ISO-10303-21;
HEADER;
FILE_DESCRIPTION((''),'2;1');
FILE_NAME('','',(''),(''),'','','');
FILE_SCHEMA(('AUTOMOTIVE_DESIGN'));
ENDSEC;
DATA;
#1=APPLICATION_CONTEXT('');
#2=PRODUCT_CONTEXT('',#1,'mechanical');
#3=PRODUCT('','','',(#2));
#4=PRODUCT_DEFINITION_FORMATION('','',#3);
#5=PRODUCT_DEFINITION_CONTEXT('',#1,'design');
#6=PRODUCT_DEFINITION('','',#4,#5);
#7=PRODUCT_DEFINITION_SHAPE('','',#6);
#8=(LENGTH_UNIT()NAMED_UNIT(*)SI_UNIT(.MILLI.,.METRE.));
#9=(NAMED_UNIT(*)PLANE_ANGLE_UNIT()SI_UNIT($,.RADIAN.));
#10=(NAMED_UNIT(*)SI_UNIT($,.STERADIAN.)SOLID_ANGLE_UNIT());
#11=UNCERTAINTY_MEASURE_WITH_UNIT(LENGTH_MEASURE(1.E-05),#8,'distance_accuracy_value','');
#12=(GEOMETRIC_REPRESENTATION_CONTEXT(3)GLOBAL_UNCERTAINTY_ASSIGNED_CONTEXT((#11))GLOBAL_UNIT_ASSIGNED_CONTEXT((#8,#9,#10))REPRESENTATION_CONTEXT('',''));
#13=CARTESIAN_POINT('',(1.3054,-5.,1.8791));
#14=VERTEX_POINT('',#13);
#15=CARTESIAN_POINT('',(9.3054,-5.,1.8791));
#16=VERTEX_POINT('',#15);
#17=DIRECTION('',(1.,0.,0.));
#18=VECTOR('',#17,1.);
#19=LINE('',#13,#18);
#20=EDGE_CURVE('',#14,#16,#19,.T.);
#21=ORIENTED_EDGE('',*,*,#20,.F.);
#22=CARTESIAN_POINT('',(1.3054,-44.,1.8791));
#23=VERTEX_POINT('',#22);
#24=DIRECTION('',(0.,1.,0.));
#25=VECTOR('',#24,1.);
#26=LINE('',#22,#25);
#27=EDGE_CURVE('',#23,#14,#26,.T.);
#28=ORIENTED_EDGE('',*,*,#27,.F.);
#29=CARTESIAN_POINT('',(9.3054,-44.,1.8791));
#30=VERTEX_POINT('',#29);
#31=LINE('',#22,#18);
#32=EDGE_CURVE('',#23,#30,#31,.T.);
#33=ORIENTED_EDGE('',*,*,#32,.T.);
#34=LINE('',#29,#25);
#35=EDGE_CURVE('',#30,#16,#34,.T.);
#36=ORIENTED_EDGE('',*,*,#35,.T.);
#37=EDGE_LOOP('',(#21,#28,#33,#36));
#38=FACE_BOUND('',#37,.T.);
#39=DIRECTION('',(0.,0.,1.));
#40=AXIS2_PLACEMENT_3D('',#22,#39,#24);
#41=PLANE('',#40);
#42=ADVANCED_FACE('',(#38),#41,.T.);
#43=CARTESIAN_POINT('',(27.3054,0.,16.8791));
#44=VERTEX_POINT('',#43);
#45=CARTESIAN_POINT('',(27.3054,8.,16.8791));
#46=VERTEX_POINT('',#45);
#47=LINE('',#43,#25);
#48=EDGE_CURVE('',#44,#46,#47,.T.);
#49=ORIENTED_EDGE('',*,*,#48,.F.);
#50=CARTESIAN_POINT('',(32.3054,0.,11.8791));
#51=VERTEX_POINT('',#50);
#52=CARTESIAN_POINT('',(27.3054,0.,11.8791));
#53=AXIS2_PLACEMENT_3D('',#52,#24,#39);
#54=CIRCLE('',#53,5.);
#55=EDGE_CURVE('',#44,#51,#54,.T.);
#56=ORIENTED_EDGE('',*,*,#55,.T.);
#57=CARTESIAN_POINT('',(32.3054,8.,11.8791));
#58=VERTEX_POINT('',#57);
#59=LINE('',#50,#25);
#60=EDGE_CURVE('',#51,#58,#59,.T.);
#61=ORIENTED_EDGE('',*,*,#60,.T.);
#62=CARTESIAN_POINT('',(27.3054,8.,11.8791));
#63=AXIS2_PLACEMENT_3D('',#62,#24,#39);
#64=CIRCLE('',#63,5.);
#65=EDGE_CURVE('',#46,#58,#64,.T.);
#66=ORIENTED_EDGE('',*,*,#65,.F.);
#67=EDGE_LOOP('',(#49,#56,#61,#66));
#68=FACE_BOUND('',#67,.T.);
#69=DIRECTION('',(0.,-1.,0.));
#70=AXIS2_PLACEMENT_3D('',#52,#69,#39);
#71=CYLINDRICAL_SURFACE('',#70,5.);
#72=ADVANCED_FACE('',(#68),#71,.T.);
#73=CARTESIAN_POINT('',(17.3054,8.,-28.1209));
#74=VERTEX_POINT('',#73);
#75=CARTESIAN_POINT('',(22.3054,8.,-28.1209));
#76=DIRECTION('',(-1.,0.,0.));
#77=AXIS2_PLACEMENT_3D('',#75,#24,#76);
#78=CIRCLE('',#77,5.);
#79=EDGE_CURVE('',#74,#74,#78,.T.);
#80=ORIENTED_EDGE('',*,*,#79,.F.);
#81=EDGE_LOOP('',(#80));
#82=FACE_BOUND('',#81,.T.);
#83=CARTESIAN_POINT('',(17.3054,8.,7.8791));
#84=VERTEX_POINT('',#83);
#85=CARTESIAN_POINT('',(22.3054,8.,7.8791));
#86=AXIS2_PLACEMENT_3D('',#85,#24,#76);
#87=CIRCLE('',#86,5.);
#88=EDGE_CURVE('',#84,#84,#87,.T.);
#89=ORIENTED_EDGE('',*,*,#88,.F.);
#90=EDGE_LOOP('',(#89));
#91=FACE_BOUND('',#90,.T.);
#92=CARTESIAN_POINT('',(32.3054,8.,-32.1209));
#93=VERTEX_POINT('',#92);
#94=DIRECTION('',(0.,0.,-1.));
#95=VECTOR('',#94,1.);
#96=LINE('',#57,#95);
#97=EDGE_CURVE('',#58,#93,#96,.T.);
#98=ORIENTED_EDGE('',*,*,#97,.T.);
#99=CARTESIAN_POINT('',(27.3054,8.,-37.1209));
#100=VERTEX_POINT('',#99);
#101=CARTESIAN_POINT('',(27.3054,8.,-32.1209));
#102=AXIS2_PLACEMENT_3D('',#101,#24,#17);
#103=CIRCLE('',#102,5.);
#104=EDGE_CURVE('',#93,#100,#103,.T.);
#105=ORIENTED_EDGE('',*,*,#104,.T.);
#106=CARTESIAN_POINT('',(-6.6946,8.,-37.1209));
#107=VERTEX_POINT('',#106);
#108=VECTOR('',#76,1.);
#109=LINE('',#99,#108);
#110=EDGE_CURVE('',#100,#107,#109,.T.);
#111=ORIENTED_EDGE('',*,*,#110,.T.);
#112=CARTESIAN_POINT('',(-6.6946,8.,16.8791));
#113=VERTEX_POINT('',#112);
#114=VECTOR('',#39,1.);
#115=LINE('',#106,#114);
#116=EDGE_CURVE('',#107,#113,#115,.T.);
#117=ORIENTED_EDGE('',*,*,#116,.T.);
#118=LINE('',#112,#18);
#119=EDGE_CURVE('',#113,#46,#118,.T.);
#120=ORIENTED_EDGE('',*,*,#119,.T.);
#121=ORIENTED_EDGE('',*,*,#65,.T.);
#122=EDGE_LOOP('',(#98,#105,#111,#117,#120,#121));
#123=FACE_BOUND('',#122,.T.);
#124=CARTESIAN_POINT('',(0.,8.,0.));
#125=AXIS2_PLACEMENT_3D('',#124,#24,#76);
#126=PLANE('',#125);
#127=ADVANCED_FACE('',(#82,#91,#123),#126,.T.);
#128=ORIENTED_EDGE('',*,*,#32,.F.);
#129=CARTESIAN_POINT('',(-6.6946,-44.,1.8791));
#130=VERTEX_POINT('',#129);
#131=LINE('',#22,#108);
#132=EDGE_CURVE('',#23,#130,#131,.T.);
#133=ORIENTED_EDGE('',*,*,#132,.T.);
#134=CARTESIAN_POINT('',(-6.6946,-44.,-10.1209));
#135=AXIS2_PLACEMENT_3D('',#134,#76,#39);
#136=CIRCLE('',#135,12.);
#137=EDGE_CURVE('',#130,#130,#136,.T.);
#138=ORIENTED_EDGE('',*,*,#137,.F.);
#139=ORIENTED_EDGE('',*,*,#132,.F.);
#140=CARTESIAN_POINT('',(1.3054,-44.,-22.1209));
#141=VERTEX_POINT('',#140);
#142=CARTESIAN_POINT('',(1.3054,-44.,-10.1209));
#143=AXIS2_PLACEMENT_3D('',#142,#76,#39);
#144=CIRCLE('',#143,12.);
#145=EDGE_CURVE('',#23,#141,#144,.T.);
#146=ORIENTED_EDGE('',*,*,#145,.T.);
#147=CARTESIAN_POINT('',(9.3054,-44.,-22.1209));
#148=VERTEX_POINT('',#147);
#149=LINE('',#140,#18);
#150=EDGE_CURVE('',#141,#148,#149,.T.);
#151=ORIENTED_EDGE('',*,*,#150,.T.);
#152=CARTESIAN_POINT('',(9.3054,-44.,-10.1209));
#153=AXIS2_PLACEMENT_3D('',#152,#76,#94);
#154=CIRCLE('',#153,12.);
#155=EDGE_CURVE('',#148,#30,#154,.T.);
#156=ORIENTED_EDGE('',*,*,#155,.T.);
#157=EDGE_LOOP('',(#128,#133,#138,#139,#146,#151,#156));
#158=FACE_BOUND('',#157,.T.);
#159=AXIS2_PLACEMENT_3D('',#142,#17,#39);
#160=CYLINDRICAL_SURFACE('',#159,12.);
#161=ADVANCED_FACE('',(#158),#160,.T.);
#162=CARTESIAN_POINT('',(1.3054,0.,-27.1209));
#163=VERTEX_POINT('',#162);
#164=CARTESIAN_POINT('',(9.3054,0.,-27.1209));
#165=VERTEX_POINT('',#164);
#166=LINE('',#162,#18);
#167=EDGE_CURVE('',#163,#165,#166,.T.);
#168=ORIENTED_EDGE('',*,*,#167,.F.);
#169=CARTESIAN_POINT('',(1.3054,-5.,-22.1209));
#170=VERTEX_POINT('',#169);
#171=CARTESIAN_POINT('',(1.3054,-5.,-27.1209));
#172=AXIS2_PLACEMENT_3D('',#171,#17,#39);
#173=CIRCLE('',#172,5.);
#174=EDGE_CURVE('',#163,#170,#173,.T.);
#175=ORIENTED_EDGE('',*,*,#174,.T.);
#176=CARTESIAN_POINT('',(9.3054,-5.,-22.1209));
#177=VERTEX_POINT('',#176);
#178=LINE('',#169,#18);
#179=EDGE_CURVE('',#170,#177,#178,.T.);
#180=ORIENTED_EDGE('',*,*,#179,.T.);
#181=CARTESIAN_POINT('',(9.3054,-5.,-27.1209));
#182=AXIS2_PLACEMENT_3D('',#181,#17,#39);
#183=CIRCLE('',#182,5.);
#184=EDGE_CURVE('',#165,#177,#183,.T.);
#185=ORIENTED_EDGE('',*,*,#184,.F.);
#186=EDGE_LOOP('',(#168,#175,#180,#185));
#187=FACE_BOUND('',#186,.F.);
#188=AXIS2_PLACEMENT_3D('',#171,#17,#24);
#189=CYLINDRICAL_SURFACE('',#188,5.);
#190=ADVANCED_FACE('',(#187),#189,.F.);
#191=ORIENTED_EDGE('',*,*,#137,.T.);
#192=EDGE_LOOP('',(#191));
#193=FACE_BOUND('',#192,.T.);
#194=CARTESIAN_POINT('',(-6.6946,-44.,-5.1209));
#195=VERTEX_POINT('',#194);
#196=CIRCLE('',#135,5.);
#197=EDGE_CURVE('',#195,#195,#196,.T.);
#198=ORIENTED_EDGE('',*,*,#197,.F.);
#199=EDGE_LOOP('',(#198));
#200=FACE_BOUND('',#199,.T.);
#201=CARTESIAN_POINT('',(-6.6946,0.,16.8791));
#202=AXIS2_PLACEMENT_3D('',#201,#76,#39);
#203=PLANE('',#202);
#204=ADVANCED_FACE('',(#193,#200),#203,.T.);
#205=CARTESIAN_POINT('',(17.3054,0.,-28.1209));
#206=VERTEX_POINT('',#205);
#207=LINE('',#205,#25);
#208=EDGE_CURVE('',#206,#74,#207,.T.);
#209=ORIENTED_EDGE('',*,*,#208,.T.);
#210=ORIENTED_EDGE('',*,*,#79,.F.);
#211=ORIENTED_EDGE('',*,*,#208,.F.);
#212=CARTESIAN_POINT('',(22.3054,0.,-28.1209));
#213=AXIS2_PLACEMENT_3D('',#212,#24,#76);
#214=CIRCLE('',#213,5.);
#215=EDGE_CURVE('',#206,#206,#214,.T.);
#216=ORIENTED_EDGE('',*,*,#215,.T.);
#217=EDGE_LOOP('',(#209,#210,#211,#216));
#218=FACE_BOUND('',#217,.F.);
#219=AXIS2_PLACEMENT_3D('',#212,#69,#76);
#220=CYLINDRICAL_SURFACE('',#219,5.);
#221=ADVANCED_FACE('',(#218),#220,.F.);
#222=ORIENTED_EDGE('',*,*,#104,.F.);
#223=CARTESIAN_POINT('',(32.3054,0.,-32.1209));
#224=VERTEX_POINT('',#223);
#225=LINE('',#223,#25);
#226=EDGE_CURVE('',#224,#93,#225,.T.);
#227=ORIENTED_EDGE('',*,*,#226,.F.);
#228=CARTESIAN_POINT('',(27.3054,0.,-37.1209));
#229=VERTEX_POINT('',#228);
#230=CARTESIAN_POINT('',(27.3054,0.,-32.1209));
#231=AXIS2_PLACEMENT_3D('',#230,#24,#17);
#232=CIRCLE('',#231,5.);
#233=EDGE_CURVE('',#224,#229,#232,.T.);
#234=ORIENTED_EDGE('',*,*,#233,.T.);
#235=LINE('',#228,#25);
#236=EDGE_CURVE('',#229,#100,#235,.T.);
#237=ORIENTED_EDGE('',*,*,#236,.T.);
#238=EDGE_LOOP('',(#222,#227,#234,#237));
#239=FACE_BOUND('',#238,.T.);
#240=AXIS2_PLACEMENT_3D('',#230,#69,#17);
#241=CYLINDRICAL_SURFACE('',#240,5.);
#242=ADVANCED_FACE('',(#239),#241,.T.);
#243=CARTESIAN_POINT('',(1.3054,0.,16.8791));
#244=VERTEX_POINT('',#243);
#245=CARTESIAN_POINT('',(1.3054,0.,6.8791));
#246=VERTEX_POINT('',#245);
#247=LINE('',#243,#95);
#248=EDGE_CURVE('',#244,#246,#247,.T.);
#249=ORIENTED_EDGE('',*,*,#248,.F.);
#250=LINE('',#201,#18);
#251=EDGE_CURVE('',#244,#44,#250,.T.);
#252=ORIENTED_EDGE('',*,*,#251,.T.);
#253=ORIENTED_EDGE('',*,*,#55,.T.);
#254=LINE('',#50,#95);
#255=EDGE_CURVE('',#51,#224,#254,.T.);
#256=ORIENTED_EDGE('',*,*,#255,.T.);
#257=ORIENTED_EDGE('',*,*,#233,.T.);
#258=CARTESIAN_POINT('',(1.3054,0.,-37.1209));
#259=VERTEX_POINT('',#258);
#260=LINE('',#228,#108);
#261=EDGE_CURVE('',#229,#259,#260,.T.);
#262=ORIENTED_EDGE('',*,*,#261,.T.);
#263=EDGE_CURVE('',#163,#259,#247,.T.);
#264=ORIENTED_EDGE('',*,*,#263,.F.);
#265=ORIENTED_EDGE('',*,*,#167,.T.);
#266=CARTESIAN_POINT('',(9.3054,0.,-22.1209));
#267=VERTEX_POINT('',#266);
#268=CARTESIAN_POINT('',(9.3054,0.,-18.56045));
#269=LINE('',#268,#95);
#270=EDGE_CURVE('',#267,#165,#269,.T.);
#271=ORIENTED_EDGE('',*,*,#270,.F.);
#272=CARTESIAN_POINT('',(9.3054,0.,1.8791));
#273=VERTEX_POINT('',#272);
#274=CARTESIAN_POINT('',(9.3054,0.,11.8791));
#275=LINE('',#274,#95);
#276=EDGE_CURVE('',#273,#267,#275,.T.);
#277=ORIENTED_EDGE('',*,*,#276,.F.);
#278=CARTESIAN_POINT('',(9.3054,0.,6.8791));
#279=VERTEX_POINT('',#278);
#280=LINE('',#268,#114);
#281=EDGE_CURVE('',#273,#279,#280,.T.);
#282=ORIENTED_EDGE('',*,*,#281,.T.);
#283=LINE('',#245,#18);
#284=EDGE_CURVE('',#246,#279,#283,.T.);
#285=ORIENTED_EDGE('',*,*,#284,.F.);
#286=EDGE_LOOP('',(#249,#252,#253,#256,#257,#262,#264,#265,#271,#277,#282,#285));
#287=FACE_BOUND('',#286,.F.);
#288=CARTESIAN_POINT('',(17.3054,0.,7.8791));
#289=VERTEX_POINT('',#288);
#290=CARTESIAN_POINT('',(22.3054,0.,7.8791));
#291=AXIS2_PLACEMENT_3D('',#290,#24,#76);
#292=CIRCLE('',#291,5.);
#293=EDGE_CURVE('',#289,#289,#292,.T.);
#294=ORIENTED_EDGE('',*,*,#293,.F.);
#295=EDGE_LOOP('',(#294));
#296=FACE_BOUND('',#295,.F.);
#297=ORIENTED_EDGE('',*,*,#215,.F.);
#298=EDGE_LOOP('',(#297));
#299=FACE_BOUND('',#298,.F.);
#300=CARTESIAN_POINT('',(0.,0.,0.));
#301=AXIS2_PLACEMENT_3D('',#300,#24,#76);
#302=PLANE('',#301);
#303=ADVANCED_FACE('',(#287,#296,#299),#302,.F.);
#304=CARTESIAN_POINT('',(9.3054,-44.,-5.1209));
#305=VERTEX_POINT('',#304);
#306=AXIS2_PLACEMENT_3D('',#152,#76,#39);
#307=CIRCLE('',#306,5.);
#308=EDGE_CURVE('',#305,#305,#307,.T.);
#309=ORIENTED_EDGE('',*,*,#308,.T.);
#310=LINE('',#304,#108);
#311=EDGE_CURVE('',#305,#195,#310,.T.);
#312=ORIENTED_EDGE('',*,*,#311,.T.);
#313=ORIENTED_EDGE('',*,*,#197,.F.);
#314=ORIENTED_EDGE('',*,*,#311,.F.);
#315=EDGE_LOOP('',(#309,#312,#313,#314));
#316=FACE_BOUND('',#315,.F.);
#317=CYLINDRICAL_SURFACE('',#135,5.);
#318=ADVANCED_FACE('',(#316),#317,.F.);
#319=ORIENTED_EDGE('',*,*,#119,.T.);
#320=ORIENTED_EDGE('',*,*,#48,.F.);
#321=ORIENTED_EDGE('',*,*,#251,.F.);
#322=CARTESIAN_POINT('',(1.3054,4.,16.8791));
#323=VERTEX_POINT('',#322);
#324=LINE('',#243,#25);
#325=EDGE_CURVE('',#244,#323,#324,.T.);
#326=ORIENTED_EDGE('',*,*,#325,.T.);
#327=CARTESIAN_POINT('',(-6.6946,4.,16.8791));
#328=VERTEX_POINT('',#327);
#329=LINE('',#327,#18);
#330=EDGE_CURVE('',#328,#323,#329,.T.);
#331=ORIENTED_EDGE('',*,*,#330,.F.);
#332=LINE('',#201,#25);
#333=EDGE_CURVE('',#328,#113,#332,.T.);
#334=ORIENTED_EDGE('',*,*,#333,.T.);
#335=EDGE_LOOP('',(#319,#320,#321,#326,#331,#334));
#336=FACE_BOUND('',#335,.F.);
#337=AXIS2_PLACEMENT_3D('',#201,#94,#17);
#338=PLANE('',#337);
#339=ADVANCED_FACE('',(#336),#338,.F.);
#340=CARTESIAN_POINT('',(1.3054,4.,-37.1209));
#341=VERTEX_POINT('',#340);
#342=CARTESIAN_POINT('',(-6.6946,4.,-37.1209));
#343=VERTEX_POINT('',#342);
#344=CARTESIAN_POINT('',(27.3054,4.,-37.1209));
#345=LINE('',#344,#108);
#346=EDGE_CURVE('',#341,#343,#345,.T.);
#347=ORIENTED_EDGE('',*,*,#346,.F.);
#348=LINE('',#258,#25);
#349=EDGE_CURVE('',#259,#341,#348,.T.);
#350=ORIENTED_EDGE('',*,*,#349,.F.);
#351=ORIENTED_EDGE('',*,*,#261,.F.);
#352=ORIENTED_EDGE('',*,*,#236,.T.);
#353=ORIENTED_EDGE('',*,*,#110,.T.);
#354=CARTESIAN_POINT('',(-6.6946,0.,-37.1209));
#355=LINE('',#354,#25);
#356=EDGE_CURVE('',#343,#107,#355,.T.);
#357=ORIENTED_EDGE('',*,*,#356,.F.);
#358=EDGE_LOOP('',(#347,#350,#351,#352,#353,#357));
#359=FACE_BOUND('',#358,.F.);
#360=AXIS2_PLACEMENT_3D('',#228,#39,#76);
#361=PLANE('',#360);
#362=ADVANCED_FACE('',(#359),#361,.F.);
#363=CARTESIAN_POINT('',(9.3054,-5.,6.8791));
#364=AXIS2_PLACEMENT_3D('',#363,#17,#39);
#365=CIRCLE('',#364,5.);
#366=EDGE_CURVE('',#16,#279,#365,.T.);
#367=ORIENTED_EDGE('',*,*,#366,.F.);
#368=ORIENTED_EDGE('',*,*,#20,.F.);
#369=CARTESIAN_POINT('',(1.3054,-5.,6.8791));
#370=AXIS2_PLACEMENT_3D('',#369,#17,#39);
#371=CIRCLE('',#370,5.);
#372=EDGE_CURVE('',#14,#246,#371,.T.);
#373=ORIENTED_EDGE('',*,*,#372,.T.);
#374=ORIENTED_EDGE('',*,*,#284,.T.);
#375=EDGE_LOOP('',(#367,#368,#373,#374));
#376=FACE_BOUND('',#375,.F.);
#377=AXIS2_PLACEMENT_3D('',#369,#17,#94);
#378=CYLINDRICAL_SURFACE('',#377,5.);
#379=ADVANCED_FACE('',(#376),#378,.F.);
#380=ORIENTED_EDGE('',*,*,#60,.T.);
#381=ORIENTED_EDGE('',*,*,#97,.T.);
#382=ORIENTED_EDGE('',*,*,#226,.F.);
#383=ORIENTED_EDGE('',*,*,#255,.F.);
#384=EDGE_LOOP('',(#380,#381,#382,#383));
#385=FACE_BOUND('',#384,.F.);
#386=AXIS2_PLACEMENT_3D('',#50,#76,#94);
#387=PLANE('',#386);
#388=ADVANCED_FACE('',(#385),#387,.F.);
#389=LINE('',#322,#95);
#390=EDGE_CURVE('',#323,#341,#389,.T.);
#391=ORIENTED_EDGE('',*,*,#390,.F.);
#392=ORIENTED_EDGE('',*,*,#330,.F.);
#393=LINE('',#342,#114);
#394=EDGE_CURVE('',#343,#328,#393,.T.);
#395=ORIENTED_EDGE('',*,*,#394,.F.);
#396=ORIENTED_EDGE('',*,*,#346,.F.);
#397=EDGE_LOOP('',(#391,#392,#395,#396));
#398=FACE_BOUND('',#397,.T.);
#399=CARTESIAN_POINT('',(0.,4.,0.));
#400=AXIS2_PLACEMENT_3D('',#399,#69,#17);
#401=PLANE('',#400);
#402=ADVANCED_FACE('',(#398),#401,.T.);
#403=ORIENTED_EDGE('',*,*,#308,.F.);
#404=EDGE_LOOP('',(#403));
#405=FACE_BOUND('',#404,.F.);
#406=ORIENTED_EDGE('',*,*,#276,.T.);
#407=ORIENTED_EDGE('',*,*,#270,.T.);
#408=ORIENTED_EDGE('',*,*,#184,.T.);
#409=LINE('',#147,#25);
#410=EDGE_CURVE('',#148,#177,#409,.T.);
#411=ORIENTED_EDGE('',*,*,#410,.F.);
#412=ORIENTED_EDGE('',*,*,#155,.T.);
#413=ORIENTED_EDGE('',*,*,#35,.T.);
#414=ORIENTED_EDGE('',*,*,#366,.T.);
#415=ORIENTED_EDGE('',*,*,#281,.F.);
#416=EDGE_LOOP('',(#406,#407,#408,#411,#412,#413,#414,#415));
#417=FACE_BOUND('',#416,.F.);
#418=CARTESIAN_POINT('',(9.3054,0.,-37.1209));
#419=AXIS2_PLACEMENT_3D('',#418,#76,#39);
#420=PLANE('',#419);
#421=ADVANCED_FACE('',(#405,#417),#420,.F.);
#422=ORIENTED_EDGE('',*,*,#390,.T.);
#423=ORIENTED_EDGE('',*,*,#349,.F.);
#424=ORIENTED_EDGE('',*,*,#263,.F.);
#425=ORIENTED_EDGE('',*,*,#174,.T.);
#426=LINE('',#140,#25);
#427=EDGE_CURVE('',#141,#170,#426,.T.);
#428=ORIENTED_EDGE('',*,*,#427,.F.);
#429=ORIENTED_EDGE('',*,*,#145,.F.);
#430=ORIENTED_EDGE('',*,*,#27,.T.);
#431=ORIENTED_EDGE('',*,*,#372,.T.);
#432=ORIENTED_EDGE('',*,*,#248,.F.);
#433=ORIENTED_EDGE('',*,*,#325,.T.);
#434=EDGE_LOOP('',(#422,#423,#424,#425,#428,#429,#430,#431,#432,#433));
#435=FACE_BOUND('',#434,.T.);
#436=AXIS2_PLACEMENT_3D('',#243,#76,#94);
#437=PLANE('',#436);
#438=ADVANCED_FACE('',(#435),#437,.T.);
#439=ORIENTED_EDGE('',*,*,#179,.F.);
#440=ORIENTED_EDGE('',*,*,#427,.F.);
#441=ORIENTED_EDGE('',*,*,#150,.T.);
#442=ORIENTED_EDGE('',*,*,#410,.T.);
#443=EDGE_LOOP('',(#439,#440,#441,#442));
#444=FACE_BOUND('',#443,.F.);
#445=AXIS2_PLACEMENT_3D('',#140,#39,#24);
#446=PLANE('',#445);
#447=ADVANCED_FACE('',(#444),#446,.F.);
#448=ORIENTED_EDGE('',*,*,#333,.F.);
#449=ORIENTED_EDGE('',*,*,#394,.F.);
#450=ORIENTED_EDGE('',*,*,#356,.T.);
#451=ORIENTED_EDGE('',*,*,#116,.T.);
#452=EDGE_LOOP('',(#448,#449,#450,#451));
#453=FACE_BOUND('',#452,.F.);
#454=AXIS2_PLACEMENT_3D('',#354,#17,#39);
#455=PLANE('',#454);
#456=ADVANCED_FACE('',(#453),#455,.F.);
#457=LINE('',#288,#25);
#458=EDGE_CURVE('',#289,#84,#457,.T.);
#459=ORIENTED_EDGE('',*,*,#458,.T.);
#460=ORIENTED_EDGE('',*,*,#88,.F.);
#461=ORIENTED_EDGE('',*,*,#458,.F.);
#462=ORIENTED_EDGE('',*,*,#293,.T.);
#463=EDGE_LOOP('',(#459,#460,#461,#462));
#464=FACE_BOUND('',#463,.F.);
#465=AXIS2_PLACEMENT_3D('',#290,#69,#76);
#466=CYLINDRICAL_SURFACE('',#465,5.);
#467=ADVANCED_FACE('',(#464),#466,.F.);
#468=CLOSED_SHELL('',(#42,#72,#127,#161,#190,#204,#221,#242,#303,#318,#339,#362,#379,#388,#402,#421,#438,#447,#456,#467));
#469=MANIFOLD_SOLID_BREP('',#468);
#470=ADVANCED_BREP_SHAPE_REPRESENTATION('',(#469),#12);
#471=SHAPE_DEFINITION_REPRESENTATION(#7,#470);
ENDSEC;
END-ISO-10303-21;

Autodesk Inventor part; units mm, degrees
ref_plane "YZ Plane" through (0, 0, 0) normal (1, 0, 0) x (0, 1, 0)
ref_plane "XZ Plane" through (0, 0, 0) normal (0, 1, 0) x (-1, 0, 0)
ref_plane "XY Plane" through (0, 0, 0) normal (0, 0, 1) x (1, 0, 0)
sketch "Sketch1" plane through (0, 0, 0) normal (0, 1, 0) x (-1, 0, 0)
  line L0 (6.6946, 16.8791) -> (-27.3054, 16.8791)
  line L1 (-32.3054, 11.8791) -> (-32.3054, -32.1209)
  line L2 (-27.3054, -37.1209) -> (6.6946, -37.1209)
  line L3 (6.6946, -37.1209) -> (6.6946, 16.8791)
  arc A0 (-27.3054, 16.8791) -> (-32.3054, 11.8791) centre (-27.3054, 11.8791) ccw
  arc A1 (-32.3054, -32.1209) -> (-27.3054, -37.1209) centre (-27.3054, -32.1209) ccw
  circle A2 centre (-22.3054, 7.8791) radius 5
  circle A3 centre (-22.3054, -28.1209) radius 5
  point P0 (0, 0)
  point P1 (-32.3054, -37.1209)
  point P2 (-32.3054, 16.8791)
  dimension "d0" = 39
  dimension "d1" = 54
  dimension "d2" = 5
  dimension "d3" = 5
  dimension "d5" = 10
  dimension "d6" = 10
  dimension "d7" = 9
  dimension "d8" = 9
extrude "Extrusion1" add sketch "Sketch1" along normal blind 8
sketch "Sketch2" plane through (0, 0, 0) normal (0, -1, 0) x (1, 0, 0)
  line L0 (-6.6946, -37.1209) -> (-6.6946, 16.8791) projected
  line L1 (-6.6946, 16.8791) -> (1.3054, 16.8791)
  line L2 (-6.6946, 16.8791) -> (27.3054, 16.8791) projected
  line L3 (1.3054, 16.8791) -> (1.3054, -37.1209)
  line L4 (27.3054, -37.1209) -> (-6.6946, -37.1209) projected
  line L5 (-6.6946, -37.1209) -> (1.3054, -37.1209)
  line L6 (-6.6946, -37.1209) -> (-6.6946, 16.8791)
  point P0 (0, 0)
  dimension "d11" = 8
extrude "Extrusion2" cut sketch "Sketch2" against normal blind 4
ref_plane "Work Plane1" through (1.3054, 0, -37.1209) normal (-1, 0, 0) x (0, 0, 1)
sketch "Sketch3" plane through (1.3054, 0, -37.1209) normal (-1, 0, 0) x (0, 0, 1)
  line L0 (54, 0) -> (54, 8) projected
  circle A0 centre (27, -44) radius 5
  arc A1 (15, -44) -> (39, -44) centre (27, -44) ccw
  line L1 (39, -44) -> (39, 0)
  line L2 (49, 0) -> (5, 0) projected
  line L3 (15, -44) -> (15, 0)
  line L4 (39, 0) -> (15, 0)
  point P0 (37.1209, 0)
  dimension "d17" = 10
  dimension "d18" = 24
extrude "Extrusion3" add sketch "Sketch3" against normal blind 8
sketch "Sketch4" plane through (1.3054, 0, 16.8791) normal (-1, 0, 0) x (0, 0, 1)
  line L0 (0, 4) -> (0, 0) projected
  circle A0 centre (-27, -44) radius 12
  point P0 (-16.8791, 0)
  dimension "d23" = 24
extrude "Extrusion4" add sketch "Sketch4" along normal blind 8
sketch "Sketch5" plane through (-6.6946, -44, -10.1209) normal (-1, 0, 0) x (0, 0, 1)
  circle A0 centre (0, 0) radius 5
  point P0 (10.1209, 44)
  dimension "d26" = 10
extrude "Extrusion5" cut sketch "Sketch5" against normal blind 8
fillet "Face Fillet1" radius 5 1 edges at (5.3054, 0, 1.8791)
fillet "Face Fillet2" radius 5 1 edges at (5.3054, 0, -22.1209)
properties part number "yatak"
